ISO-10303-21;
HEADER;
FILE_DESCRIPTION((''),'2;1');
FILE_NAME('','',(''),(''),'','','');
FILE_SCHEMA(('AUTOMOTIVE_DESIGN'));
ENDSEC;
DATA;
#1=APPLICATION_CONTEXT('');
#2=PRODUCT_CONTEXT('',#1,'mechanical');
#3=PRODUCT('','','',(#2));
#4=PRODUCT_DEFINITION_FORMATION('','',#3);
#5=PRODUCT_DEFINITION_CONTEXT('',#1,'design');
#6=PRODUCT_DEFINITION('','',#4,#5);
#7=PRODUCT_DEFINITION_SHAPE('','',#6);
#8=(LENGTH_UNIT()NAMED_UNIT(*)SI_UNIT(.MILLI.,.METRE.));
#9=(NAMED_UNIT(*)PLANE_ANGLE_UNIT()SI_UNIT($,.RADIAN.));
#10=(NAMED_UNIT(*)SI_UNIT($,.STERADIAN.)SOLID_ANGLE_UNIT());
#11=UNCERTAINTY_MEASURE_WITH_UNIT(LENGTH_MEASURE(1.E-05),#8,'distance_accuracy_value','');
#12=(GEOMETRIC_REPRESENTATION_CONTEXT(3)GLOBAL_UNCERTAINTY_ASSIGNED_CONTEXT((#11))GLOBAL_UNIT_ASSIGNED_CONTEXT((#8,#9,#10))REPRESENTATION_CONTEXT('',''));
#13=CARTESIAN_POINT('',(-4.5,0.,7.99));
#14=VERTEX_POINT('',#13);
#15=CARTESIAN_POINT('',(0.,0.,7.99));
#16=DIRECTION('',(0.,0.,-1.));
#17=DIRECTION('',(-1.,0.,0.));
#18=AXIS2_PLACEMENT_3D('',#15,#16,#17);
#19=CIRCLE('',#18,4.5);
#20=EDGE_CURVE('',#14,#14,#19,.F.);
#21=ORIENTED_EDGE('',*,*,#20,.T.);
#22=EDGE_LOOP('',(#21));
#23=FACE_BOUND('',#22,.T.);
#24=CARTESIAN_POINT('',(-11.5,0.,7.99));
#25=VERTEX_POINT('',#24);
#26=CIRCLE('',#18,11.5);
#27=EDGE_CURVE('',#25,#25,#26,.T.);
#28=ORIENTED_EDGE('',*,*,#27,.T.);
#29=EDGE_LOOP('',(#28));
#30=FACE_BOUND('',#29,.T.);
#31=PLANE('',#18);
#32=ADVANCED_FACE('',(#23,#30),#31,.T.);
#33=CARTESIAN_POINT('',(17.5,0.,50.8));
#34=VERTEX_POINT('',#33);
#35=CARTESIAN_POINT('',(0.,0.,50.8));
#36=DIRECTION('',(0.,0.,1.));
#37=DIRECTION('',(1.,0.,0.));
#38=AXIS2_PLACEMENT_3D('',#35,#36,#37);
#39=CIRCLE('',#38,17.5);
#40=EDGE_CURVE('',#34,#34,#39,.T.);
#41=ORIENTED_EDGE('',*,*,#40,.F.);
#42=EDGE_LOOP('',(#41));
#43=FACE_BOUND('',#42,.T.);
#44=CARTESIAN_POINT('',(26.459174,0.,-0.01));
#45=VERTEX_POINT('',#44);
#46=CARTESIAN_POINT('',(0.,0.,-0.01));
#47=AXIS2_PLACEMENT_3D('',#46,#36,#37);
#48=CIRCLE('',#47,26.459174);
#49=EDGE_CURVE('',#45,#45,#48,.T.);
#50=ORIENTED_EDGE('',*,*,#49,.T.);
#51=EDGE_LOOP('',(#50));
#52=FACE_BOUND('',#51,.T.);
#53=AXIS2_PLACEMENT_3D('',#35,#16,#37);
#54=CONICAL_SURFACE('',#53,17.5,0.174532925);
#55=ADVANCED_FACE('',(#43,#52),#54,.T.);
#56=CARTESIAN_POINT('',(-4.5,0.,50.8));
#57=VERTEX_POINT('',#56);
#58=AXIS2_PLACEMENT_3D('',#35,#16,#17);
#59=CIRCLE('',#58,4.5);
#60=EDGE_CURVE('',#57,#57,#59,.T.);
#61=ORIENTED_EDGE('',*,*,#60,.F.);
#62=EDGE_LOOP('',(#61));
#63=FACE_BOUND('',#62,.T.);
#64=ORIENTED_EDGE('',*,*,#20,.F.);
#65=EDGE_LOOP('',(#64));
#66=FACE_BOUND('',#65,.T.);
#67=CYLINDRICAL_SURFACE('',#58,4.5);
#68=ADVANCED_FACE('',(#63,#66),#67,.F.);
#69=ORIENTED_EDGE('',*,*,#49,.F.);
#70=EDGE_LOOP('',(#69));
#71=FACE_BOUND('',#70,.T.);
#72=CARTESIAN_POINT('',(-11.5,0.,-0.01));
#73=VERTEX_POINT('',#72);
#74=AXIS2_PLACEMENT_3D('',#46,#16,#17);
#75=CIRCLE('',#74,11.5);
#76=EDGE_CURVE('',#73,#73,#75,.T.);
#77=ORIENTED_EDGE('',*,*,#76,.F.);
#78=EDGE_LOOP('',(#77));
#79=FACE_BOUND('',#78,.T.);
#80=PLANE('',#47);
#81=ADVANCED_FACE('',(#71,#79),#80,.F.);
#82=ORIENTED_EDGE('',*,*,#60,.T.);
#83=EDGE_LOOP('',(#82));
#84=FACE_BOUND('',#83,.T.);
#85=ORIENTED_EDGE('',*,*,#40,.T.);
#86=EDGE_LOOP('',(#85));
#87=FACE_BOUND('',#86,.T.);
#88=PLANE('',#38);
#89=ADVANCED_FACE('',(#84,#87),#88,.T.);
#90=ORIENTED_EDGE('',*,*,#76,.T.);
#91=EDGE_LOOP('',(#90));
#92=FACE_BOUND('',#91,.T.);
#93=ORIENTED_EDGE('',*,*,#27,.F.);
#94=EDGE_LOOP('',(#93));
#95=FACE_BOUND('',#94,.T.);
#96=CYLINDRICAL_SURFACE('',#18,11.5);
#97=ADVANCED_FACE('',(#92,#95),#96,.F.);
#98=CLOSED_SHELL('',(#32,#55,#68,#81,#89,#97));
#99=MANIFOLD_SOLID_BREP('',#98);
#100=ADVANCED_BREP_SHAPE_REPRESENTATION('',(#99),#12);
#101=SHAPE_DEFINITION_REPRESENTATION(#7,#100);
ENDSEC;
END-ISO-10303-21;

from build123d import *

# Parameters (mm, degrees)
BOSS_EXTRUDE_DEPTH      = 50.8
BOSS_EXTRUDE_DEPTH_BACK = 0.01
SKETCH1_R               = 17.5
SKETCH2_R               = 4.5
CUT_EXTRUDE1_DEPTH      = 64.101758025
SKETCH3_R               = 11.5
CUT_EXTRUDE3_DEPTH      = 8


# Read off the part's stored shape, not the designer's step: Draft3
with BuildPart() as part:
    # Sketch1 → Boss-Extrude (new, two sides: drawn at the far end of the back side and taken through both)
    with BuildSketch(Plane.XY.offset(-BOSS_EXTRUDE_DEPTH_BACK)):
        Circle(SKETCH1_R)
    extrude(amount=BOSS_EXTRUDE_DEPTH + BOSS_EXTRUDE_DEPTH_BACK)

    # Draft3 outline → Draft3 (revolve)
    with BuildSketch(Plane.XZ):
        Polygon((26.45917389, -0.01), (17.5, 50.8), (17.5, -0.01), align=None)
    revolve(axis=Axis((0, 0, 0), (0, 0, 1)))

    # Sketch2 → Cut-Extrude1 (cut, through all)
    with BuildSketch(Plane(origin=(0, 0, -0.01), x_dir=(-1, 0, 0), z_dir=(0, 0, -1))):
        Circle(SKETCH2_R)
    extrude(amount=-CUT_EXTRUDE1_DEPTH, mode=Mode.SUBTRACT)

    # Sketch3 → Cut-Extrude3 (cut)
    with BuildSketch(Plane(origin=(0, 0, -0.01), x_dir=(-1, 0, 0), z_dir=(0, 0, -1))):
        Circle(SKETCH3_R)
    extrude(amount=-CUT_EXTRUDE3_DEPTH, mode=Mode.SUBTRACT)


solid = part.part
